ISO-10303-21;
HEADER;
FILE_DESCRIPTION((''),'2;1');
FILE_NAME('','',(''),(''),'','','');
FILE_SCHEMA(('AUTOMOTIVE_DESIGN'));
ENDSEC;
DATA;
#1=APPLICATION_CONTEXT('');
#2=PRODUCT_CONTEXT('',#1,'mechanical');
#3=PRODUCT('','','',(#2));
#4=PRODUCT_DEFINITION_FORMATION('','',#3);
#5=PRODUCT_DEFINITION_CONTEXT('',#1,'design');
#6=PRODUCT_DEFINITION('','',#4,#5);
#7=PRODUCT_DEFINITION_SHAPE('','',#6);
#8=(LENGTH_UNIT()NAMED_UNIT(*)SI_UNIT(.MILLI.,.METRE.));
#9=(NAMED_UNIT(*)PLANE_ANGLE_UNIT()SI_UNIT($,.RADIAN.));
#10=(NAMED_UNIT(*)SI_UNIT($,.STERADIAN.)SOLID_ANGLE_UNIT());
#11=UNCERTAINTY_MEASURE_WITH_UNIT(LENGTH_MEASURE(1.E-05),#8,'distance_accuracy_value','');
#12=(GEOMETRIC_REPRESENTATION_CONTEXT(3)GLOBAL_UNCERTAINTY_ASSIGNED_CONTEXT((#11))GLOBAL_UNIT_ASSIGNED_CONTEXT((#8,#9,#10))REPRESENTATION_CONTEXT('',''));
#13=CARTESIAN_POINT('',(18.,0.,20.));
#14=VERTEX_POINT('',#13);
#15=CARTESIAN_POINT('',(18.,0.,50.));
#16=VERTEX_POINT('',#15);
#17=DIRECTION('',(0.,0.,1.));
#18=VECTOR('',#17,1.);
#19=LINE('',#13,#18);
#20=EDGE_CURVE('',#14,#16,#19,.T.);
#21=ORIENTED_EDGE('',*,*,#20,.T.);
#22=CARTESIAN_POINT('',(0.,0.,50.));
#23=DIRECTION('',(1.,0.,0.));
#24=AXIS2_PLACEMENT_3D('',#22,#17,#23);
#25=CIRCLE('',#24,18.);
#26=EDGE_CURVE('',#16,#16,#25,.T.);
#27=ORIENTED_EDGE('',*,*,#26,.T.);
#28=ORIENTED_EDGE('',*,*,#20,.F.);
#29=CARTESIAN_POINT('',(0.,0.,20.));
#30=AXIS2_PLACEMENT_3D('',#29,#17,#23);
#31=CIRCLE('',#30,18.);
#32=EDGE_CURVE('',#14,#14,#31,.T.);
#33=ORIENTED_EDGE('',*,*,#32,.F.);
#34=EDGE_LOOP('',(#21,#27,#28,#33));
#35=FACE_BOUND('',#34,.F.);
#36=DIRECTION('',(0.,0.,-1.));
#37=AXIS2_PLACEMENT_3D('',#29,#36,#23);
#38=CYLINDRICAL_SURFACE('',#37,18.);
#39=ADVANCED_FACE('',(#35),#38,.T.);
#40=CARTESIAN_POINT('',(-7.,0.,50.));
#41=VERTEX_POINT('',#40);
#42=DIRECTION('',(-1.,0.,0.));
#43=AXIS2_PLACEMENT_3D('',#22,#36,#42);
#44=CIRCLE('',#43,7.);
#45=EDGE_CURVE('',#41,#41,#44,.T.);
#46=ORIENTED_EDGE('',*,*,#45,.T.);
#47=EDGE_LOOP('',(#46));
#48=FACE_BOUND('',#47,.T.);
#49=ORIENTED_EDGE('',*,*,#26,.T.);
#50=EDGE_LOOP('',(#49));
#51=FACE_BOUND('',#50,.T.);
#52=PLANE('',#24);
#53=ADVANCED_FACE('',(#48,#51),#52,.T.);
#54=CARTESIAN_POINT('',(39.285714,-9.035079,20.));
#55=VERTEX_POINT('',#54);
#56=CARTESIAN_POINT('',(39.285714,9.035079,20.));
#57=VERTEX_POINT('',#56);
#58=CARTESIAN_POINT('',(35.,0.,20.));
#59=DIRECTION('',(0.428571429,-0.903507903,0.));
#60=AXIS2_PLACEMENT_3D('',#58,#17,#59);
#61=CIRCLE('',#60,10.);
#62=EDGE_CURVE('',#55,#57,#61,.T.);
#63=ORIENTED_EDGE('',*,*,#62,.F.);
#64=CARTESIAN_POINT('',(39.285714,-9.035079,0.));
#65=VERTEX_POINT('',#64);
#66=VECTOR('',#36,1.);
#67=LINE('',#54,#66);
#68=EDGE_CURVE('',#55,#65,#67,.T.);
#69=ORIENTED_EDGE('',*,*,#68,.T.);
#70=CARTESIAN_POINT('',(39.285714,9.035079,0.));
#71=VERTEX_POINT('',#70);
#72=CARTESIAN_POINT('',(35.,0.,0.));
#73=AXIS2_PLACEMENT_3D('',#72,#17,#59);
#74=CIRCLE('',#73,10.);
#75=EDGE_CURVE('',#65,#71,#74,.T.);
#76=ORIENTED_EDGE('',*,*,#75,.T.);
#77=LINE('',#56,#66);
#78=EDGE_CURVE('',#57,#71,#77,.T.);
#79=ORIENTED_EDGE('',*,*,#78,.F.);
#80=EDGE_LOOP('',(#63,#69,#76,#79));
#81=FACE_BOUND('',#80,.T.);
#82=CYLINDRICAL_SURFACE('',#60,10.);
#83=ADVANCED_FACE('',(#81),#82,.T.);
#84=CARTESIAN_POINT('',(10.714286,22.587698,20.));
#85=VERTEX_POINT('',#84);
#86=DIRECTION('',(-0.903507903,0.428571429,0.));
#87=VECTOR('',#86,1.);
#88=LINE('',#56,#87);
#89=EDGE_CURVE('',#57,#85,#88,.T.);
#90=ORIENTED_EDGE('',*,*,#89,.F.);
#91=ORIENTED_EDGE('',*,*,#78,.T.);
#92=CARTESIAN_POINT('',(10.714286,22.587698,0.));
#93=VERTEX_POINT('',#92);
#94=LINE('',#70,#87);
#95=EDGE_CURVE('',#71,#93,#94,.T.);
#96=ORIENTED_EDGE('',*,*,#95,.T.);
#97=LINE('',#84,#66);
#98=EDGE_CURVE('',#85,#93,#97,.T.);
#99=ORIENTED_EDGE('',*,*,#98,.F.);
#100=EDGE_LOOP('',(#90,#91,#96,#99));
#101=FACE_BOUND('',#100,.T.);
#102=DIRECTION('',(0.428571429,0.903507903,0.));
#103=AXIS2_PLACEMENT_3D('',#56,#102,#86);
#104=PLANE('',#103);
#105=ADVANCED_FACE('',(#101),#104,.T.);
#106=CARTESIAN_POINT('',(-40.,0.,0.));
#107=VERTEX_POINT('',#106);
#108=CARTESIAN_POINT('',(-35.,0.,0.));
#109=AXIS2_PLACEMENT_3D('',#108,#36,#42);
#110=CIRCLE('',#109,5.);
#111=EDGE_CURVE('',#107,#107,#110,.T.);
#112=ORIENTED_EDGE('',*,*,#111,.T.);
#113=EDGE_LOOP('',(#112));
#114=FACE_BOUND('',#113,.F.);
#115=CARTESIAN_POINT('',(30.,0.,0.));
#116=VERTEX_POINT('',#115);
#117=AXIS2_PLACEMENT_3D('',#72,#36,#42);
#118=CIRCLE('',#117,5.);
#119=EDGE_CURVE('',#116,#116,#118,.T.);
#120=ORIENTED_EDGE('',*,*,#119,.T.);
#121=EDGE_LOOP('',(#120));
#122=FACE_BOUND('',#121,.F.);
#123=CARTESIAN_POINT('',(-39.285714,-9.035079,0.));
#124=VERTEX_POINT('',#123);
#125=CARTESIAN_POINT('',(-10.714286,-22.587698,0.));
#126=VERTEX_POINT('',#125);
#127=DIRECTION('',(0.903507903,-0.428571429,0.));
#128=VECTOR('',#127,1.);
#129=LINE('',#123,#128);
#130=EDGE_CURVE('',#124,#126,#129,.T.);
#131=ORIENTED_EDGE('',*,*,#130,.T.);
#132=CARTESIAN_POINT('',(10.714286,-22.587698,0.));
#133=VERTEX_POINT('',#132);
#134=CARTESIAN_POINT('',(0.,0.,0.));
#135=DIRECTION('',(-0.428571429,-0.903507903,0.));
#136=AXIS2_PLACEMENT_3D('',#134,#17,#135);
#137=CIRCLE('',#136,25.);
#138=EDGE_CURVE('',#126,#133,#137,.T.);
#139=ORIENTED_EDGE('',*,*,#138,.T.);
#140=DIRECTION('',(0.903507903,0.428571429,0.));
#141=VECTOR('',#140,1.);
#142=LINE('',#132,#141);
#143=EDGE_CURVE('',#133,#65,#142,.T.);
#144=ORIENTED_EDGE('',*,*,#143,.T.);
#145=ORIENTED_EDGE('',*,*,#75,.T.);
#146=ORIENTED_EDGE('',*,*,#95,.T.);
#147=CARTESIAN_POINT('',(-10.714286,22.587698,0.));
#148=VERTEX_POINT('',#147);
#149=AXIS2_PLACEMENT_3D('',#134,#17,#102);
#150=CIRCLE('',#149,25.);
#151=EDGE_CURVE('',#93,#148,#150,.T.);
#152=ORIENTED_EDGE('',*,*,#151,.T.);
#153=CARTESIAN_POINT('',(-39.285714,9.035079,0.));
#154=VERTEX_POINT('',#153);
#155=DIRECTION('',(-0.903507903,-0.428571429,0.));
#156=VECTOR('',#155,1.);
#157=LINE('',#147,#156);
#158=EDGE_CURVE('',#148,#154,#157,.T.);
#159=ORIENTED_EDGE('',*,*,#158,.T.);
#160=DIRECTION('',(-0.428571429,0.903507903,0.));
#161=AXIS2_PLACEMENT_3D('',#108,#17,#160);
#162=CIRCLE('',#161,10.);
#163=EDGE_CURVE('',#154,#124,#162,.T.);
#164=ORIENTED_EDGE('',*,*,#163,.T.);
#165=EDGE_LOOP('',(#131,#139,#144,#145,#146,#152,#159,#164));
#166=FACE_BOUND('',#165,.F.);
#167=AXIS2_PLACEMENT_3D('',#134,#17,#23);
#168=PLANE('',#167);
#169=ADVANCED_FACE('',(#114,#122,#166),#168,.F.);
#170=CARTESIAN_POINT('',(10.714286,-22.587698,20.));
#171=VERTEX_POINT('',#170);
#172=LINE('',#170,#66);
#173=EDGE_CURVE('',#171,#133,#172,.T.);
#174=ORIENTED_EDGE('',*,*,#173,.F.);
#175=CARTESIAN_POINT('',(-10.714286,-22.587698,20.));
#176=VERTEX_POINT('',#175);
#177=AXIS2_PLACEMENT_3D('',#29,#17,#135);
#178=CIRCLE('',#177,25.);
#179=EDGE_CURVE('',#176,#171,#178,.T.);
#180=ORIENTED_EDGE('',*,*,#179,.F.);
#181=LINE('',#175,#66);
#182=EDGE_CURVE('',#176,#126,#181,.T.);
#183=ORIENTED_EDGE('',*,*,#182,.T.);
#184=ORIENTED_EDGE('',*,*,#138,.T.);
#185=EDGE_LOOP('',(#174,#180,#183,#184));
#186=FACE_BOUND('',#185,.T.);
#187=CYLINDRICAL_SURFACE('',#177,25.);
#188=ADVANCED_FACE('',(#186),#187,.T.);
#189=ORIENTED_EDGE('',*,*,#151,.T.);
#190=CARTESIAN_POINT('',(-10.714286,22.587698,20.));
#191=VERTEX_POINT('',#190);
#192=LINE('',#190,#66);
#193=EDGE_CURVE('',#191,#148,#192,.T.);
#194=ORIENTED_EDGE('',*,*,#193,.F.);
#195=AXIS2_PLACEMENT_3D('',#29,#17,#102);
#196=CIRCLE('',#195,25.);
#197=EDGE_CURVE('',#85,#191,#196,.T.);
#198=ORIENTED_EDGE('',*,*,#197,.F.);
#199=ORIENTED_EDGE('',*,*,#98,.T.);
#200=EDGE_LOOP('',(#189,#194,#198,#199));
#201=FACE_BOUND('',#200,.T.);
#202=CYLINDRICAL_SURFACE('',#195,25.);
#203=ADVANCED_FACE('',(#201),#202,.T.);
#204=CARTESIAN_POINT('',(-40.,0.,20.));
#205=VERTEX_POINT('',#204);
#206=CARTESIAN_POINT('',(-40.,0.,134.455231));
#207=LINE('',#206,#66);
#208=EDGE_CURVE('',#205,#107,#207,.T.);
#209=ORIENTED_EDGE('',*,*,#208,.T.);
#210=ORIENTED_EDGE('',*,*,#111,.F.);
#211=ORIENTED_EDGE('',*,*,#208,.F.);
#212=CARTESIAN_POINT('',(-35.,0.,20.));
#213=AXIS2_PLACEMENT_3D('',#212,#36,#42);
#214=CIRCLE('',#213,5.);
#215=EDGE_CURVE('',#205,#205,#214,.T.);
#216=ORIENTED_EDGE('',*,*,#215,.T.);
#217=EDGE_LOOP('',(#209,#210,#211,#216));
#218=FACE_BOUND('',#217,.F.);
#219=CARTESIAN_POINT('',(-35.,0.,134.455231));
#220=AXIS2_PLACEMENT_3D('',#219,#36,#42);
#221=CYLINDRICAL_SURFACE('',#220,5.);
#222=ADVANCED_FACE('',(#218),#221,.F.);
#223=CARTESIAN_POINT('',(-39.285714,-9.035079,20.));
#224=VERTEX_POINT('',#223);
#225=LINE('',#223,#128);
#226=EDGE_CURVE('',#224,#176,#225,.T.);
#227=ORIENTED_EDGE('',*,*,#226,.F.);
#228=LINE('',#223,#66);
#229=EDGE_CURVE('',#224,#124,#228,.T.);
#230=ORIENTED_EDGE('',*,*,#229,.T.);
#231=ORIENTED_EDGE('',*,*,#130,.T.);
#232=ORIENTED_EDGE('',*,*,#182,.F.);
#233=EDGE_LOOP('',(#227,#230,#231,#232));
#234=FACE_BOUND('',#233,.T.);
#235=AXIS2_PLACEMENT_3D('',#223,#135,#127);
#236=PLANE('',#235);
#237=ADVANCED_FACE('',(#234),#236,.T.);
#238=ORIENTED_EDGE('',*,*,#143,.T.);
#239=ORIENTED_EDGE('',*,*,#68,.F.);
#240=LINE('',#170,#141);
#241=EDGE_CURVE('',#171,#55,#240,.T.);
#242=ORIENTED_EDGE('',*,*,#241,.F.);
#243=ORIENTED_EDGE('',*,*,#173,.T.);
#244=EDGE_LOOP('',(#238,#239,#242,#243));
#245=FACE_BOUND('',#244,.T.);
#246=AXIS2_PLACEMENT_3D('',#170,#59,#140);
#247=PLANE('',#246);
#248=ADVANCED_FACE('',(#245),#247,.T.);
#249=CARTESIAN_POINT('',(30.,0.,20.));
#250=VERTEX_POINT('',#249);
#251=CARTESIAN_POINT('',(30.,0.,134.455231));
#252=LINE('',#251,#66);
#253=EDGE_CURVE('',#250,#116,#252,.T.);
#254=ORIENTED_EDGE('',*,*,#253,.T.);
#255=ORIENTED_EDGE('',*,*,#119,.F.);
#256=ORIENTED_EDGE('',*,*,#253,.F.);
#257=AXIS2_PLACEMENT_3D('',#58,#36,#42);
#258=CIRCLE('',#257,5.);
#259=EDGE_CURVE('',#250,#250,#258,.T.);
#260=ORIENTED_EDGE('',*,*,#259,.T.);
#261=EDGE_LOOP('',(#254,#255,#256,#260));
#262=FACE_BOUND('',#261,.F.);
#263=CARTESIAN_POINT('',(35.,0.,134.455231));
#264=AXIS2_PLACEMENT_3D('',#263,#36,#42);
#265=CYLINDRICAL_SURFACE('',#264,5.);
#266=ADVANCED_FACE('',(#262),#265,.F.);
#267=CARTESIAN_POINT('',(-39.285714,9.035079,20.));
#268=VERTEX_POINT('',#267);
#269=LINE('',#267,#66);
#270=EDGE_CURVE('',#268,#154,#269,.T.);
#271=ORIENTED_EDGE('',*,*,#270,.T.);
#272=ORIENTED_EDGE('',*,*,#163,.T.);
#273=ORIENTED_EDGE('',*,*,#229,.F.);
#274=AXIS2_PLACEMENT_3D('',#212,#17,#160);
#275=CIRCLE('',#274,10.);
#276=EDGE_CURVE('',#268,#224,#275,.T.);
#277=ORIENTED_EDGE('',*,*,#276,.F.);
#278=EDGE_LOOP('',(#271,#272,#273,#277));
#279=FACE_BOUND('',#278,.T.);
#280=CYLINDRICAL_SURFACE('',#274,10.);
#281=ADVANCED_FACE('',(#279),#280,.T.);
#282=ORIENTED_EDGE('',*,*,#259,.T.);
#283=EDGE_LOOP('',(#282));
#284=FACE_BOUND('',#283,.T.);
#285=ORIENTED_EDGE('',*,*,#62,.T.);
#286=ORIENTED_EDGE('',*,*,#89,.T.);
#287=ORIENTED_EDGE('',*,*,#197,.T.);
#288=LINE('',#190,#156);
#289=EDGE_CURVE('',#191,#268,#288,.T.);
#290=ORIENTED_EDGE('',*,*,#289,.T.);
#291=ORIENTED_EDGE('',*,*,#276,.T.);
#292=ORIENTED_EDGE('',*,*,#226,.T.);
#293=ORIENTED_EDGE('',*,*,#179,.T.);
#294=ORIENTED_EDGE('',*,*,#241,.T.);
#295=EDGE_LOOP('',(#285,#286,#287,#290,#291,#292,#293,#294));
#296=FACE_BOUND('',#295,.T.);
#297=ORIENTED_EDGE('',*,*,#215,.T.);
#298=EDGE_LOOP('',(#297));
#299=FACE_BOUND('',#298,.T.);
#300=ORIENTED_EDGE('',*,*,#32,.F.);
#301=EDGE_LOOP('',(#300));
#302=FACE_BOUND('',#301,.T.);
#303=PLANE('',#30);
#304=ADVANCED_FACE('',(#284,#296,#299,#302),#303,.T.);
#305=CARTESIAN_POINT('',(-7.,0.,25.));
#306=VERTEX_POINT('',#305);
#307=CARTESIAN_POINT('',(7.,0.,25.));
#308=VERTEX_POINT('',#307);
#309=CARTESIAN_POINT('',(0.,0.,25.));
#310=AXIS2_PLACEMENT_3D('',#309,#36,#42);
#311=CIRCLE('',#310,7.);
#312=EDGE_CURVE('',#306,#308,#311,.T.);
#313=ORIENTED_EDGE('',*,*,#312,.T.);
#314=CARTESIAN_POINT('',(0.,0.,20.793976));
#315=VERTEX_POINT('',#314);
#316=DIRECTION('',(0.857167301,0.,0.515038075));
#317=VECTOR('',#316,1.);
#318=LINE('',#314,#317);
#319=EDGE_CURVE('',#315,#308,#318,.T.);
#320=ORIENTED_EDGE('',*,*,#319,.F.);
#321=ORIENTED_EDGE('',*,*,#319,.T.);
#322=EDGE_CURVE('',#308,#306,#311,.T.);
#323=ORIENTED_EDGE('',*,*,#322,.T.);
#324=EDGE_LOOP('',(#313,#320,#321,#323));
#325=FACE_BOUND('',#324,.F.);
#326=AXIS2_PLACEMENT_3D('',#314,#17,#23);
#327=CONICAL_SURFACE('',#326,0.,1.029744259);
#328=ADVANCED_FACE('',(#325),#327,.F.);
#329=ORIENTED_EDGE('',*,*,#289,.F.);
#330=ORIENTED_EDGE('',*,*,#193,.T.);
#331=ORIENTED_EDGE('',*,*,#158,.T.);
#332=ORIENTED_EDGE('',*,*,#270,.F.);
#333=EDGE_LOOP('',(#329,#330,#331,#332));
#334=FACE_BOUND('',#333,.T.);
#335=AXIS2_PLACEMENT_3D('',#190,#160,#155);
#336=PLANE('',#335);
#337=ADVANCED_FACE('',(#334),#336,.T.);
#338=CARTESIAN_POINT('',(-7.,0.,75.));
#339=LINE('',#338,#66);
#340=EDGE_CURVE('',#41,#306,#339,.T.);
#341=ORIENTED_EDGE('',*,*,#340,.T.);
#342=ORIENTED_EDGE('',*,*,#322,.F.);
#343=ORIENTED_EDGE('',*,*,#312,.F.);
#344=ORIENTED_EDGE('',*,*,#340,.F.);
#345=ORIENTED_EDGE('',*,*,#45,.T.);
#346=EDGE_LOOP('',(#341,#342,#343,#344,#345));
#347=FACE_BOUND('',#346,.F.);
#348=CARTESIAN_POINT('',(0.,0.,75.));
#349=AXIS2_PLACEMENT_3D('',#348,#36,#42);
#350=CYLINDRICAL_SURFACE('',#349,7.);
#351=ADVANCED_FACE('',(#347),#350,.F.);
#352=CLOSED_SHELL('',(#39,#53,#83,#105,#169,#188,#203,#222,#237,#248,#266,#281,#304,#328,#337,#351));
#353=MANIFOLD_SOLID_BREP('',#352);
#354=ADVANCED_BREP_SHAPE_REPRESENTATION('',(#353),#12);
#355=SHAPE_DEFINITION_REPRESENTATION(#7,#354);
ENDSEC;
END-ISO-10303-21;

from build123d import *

# Parameters (mm, degrees)
F1_DEPTH = 20
F3_R     = 18
F4_DEPTH = 30
F6_D     = 14
F6_DEPTH = 25
F6_TIP   = 4.2060243332
F7_D     = 10


# Not quite as in the source:
# - a feature names something its author has since deleted; it is built from what else it names


with BuildPart() as f1:
    # F0 (on Top) → F1 (new body)
    with BuildSketch(Plane.XY):
        with BuildLine():
            Line((-10.7142857143, 22.5876975726), (-39.2857142857, 9.0350790291))
            ThreePointArc((-39.2857142857, 9.0350790291), (-45, 0), (-39.2857142857, -9.0350790291))
            Line((-39.2857142857, -9.0350790291), (-10.7142857143, -22.5876975726))
            ThreePointArc((-10.7142857143, -22.5876975726), (0, -25), (10.7142857143, -22.5876975726))
            Line((10.7142857143, -22.5876975726), (39.2857142857, -9.0350790291))
            ThreePointArc((39.2857142857, -9.0350790291), (45, 0), (39.2857142857, 9.0350790291))
            Line((39.2857142857, 9.0350790291), (10.7142857143, 22.5876975726))
            ThreePointArc((10.7142857143, 22.5876975726), (0, 25), (-10.7142857143, 22.5876975726))
        make_face()
    extrude(amount=-F1_DEPTH)


with BuildPart() as f1_1:
    # F2: moved
    add(f1.part.moved(Location((0, 0, 20))))

    # F3 (on face) → F4 (join)
    with BuildSketch(Plane.XY.offset(20)):
        Circle(F3_R)
    extrude(amount=F4_DEPTH)

    # F6
    with Locations(Plane.XY.offset(50)):
        with Locations((0, 0)):
            Hole(F6_D / 2, depth=F6_DEPTH)
            with Locations((0, 0, -(F6_DEPTH + F6_TIP / 2))):  # 118° drill point
                Cone(0, F6_D / 2, F6_TIP, mode=Mode.SUBTRACT)

    # F7 (through all)
    with Locations(Plane.XY.offset(20)):
        with Locations((-35, 0), (35, 0)):
            Hole(F7_D / 2)


solid = f1_1.part
